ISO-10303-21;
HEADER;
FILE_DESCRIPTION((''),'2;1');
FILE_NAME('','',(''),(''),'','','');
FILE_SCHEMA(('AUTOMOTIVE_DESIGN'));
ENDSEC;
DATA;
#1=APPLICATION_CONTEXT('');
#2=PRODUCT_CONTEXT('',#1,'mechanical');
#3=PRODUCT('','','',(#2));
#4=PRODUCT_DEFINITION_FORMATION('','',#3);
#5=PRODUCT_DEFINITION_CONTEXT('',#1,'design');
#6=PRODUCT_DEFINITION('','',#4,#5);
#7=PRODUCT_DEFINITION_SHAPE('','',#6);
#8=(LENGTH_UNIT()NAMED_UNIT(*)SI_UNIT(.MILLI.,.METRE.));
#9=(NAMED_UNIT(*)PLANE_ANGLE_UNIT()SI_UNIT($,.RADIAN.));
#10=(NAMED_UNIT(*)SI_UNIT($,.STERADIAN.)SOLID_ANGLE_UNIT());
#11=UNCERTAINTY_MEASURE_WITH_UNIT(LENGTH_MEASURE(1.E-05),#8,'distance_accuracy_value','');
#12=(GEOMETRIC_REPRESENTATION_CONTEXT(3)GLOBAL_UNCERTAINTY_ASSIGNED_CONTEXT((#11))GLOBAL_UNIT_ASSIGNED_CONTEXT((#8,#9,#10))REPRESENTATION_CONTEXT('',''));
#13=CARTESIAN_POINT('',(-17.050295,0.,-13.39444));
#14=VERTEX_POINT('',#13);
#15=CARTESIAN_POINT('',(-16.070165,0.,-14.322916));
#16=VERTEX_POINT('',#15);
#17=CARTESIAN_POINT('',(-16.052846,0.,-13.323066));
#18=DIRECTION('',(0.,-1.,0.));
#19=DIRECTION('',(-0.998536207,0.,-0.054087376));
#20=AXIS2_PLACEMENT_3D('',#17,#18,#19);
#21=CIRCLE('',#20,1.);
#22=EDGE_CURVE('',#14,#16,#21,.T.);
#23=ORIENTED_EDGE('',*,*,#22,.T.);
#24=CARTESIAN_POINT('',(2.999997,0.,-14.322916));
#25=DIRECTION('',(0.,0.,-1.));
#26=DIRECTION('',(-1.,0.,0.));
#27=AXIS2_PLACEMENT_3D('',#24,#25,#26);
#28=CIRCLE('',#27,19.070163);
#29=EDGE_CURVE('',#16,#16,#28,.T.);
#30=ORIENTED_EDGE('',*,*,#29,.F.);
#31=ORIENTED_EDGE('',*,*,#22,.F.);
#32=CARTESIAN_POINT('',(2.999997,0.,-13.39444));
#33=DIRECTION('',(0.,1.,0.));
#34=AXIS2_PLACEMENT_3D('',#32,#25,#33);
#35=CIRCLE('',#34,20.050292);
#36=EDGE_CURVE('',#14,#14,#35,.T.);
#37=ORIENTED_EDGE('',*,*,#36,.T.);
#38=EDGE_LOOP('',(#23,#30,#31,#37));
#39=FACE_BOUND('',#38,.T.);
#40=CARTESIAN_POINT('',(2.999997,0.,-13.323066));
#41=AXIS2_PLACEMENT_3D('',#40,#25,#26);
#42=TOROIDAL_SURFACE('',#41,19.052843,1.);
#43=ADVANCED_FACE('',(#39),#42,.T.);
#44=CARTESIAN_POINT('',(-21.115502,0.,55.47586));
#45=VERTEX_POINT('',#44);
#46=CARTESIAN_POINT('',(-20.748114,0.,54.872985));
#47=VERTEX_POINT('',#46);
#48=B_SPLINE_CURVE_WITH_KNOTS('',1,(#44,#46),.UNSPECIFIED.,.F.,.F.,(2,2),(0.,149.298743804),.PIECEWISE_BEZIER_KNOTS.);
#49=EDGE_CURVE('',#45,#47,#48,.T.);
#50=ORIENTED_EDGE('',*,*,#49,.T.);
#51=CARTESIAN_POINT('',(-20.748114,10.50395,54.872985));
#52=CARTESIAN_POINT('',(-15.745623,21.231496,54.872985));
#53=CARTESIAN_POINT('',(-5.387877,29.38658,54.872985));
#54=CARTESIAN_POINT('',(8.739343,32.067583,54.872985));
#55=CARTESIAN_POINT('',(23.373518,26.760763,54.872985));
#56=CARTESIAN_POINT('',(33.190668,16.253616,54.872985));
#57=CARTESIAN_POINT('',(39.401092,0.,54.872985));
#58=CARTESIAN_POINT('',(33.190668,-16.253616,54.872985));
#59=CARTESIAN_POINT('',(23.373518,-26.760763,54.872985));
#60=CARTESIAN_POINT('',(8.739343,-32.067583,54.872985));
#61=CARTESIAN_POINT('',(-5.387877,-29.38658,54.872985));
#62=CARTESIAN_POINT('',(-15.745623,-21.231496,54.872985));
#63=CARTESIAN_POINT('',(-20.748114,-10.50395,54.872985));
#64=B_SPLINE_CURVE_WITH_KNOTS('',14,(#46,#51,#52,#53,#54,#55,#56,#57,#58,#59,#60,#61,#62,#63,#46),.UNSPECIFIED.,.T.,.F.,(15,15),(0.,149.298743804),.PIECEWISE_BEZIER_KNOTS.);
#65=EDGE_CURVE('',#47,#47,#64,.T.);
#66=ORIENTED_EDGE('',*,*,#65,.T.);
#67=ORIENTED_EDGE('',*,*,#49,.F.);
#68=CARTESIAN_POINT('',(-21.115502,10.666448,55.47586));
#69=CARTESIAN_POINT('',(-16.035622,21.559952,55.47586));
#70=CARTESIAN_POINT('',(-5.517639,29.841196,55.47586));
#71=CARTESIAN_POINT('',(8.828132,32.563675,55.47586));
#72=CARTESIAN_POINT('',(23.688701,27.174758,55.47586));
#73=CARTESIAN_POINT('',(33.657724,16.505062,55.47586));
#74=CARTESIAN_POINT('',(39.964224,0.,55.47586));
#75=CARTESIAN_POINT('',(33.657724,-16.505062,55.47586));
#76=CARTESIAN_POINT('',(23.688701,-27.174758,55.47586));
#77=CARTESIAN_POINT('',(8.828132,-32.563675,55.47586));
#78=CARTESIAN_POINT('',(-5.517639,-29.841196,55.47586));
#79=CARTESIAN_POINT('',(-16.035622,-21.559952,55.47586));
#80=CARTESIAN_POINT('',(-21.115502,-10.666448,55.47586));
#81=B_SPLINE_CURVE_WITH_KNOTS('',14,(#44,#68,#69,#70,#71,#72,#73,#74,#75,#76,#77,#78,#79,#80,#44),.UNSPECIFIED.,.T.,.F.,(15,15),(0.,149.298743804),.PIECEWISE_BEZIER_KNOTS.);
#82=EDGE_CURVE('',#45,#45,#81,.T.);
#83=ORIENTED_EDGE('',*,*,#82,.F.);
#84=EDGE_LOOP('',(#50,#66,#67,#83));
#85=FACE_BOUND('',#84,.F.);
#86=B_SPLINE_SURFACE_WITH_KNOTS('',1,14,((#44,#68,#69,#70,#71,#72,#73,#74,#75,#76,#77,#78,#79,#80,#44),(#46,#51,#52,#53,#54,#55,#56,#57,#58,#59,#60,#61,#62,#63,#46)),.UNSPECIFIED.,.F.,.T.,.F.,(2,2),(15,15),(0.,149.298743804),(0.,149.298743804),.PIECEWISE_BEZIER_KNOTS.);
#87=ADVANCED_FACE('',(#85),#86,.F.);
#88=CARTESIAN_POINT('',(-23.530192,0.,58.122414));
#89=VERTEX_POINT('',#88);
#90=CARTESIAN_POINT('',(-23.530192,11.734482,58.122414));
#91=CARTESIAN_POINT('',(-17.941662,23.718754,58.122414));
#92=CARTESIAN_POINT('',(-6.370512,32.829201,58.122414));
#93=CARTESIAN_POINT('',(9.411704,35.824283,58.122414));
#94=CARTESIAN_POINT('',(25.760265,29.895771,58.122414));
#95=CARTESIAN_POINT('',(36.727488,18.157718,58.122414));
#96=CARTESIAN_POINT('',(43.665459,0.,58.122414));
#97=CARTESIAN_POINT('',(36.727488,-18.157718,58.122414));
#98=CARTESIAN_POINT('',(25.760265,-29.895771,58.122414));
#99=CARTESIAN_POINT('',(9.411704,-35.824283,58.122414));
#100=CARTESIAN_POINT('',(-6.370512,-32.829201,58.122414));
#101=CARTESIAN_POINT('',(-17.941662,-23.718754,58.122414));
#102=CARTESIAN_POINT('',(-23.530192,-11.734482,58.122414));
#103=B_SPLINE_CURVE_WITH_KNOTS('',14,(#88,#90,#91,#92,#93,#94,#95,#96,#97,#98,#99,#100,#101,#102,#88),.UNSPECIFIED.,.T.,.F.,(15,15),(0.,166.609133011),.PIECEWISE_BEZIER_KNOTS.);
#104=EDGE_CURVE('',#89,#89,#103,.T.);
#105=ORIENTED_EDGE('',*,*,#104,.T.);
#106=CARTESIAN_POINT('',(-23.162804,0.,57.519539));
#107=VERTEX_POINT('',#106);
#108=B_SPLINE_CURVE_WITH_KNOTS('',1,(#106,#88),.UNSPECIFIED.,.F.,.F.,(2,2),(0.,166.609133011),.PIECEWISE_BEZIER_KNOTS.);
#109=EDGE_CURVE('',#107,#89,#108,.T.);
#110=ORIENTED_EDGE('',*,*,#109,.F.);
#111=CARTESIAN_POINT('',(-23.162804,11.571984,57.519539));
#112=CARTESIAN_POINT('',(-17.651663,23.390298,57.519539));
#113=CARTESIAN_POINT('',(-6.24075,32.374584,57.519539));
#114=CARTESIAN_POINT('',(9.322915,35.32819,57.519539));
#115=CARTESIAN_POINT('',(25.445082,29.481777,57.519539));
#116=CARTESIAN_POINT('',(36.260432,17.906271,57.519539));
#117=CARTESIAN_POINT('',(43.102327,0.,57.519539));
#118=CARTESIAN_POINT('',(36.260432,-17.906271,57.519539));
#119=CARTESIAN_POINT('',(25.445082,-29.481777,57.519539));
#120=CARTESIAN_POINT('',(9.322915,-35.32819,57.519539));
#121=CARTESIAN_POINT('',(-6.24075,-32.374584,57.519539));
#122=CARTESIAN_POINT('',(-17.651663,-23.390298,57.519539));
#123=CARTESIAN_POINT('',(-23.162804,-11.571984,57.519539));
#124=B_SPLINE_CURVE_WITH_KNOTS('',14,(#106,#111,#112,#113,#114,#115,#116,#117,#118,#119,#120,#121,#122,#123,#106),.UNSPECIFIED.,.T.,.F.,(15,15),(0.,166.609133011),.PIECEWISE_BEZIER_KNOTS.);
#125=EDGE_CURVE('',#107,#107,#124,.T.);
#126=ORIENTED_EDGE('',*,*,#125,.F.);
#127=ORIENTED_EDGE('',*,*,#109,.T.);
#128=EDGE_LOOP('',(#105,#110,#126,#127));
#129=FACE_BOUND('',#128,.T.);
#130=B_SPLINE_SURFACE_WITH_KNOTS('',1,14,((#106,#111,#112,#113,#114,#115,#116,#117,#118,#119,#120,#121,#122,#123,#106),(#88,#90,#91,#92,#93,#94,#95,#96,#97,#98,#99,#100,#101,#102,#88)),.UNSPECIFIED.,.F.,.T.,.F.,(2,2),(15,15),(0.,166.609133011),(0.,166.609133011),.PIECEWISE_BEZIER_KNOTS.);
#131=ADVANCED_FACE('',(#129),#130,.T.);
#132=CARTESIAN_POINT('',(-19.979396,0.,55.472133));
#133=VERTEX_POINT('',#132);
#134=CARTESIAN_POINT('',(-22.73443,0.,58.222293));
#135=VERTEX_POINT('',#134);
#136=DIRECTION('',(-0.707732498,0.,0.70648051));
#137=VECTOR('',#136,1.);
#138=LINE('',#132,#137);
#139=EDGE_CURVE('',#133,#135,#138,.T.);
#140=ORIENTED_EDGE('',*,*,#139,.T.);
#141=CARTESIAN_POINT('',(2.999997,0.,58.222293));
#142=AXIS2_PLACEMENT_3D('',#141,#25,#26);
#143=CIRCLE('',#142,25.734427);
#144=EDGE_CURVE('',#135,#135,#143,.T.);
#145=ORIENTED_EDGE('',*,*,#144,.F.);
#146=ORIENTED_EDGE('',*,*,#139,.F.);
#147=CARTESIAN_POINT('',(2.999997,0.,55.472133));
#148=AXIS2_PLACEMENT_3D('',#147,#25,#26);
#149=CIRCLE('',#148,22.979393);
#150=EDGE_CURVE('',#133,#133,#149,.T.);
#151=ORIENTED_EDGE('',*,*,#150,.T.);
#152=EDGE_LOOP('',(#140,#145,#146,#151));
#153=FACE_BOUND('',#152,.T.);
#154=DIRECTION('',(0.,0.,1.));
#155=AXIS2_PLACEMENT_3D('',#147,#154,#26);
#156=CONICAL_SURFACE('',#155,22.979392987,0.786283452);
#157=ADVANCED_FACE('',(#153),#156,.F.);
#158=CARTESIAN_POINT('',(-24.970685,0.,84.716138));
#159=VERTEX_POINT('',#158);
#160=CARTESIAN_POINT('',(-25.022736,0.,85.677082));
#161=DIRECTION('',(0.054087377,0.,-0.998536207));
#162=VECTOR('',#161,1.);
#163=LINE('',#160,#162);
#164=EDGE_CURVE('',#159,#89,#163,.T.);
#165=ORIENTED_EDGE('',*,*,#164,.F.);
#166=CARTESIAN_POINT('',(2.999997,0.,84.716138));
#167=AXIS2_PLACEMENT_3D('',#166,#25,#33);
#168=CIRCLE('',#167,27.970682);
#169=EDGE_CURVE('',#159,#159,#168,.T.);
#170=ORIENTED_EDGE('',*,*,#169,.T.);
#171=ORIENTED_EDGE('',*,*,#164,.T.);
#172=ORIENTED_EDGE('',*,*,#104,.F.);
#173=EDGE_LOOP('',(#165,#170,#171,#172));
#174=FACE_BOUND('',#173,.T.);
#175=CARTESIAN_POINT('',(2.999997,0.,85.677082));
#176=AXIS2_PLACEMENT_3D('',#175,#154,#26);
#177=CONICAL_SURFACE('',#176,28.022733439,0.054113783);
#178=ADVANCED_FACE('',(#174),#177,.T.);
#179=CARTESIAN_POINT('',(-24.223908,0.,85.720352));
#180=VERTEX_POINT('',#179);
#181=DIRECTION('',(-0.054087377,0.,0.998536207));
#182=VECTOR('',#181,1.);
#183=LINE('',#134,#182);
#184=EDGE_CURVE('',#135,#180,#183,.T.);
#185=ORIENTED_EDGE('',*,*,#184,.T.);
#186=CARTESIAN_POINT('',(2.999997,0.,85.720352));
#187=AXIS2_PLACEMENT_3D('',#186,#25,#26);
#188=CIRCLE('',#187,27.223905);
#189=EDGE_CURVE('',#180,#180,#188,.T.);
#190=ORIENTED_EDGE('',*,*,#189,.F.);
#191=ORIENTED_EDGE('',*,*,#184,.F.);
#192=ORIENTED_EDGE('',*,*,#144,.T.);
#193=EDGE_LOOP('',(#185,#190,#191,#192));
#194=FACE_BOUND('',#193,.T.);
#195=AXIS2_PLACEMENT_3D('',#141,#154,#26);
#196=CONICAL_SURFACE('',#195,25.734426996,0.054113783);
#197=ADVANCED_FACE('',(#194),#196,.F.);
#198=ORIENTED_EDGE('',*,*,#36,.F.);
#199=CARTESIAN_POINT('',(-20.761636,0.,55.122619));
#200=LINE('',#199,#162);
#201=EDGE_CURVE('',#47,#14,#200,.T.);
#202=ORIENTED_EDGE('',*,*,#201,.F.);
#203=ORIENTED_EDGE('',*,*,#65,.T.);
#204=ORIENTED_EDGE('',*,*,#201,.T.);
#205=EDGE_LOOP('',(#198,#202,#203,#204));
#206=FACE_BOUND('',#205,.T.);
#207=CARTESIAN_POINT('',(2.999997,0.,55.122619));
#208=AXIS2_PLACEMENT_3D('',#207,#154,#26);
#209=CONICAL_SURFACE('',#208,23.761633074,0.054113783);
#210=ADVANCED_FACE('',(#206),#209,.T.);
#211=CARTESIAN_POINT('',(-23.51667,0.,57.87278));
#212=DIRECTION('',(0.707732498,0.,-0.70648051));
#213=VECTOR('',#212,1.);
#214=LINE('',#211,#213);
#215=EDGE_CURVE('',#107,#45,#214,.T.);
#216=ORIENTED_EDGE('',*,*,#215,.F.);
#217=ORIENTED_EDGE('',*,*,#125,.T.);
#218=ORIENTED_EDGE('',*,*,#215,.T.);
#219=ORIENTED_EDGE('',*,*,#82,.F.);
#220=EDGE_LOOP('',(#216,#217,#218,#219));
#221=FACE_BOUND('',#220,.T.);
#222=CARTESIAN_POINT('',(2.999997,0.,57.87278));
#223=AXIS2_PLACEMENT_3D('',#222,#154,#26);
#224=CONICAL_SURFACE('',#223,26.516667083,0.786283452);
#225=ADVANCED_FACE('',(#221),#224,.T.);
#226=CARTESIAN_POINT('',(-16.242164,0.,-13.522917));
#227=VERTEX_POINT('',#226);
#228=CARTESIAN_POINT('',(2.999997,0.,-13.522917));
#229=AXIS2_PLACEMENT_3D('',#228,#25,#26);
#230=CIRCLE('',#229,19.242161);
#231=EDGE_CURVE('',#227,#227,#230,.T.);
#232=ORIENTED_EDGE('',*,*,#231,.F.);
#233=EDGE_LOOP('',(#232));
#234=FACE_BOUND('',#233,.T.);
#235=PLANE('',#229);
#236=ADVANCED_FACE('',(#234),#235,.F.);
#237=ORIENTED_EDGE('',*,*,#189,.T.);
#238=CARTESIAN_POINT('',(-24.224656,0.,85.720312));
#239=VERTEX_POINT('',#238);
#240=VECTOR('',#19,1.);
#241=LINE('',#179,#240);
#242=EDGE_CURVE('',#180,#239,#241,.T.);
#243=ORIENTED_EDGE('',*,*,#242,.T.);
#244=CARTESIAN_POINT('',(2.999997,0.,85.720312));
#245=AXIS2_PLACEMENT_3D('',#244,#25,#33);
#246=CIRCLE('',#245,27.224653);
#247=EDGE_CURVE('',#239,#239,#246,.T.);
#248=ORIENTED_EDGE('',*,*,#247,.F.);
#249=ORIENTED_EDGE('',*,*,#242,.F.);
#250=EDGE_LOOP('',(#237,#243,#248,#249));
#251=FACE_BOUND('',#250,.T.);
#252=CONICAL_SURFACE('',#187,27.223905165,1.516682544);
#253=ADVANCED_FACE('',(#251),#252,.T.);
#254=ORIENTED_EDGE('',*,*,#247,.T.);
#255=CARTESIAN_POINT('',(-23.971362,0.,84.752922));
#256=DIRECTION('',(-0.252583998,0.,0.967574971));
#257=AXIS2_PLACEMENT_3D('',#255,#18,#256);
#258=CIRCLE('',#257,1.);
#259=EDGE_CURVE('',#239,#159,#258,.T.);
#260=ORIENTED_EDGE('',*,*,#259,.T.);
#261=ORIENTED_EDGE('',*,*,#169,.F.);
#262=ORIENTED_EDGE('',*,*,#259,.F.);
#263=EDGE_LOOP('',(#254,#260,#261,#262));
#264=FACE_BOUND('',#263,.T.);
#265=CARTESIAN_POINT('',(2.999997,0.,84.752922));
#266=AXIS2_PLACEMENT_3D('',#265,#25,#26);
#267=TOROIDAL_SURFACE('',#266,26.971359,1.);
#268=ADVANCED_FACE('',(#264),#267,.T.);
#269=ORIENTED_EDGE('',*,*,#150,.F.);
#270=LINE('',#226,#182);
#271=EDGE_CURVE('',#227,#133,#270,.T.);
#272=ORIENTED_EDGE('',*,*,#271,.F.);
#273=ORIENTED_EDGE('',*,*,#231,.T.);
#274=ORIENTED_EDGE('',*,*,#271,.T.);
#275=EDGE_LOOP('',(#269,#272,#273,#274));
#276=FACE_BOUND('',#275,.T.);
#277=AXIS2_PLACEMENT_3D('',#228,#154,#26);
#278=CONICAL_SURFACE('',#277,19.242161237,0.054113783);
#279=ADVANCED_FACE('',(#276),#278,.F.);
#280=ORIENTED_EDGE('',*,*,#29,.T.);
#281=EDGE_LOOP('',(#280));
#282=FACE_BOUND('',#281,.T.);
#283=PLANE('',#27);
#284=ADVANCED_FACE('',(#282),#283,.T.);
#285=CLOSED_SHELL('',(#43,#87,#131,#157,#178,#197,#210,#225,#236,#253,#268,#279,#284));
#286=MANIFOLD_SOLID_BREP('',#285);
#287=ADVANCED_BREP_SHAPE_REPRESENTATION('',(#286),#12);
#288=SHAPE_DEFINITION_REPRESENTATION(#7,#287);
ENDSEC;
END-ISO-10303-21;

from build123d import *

# Parameters (mm, degrees)
F3_C1_SIZE2 = 0.25
F3_C1_SIZE  = 0.5
F3_C2_SIZE2 = 0.25
F3_C2_SIZE  = 0.5


# Not quite as in the source:
# - a fillet or chamfer that OpenCascade refuses, or shapes differently, is made with other operations: its cross-section is extruded or revolved along the edge and cut away or added


with BuildPart() as f1:
    # F0 (on Front) → F1 (revolve)
    with BuildSketch(Plane.XZ):
        Polygon((-24.2239079518, 85.7203521749), (-25.0227362253, 85.6770823112), (-23.5166698694, 57.8727796674), (-20.7616358603, 55.1226193476), (-17.0000027865, -14.3229160458), (2.9999972135, -14.3229160458), (2.9999972135, -13.5229167386), (-16.2421640236, -13.5229167386), (-19.9793957734, 55.4721326625), (-22.7344297825, 58.2222929823), align=None)
    revolve(axis=Axis((2.9999972135, 0, 16.662178661), (0, 0, -1)))

    # F2: fillet of radius 1 on 2 edges, made by hand

    # F2_s1 → F2_t2 (revolve, cut)
    with BuildSketch(Plane.XZ):
        with BuildLine():
            ThreePointArc((-24.2239458394, 85.7204973112), (-24.7789966166, 85.342605366), (-24.9698980485, 84.6988349638))
            Line((-24.9698980485, 84.6988349638), (-24.9898687726, 84.6977532163))
            ThreePointArc((-24.9898687726, 84.6977532163), (-25.0162129708, 85.1868809465), (-25.0427069494, 85.6760005637))
            Line((-25.0427069494, 85.6760005637), (-25.0238179728, 85.6970530353))
            ThreePointArc((-25.0238179728, 85.6970530353), (-24.6244188052, 85.7186871564), (-24.2289975194, 85.7398488106))
            Line((-24.2289975194, 85.7398488106), (-24.2239458394, 85.7204973112))
        make_face()
    revolve(axis=Axis((2.9999972135, 0, 85.6770823112), (0, 0, -1)), mode=Mode.SUBTRACT)

    # F2_s3 → F2_t4 (revolve, cut)
    with BuildSketch(Plane.XZ):
        with BuildLine():
            ThreePointArc((-17.0513818139, -13.3771534223), (-16.7405637995, -14.0490437922), (-16.0528456074, -14.3230660458))
            Line((-16.0528456074, -14.3230660458), (-16.0528456074, -14.3430660458))
            ThreePointArc((-16.0528456074, -14.3430660458), (-16.526424197, -14.3429160458), (-17.0000027865, -14.3429160458))
            Line((-17.0000027865, -14.3429160458), (-17.0199735106, -14.3239977933))
            ThreePointArc((-17.0199735106, -14.3239977933), (-17.0455881341, -13.851112425), (-17.071352538, -13.3782351698))
            Line((-17.071352538, -13.3782351698), (-17.0513818139, -13.3771534223))
        make_face()
    revolve(axis=Axis((2.9999972135, 0, -14.3229160458), (0, 0, -1)), mode=Mode.SUBTRACT)

    # F3: chamfer of 0.25 x 0.5 on 3 edges, made by hand

    # F3_c1
    f3_c1_edges = [f1.edges().sort_by_distance(p)[0] for p in [
        (26.7616302873, 0, 55.1226193476),
    ]]
    f3_c1_side = f1.faces().sort_by_distance((26.7651689498, 0, 55.1261517501))[0]
    chamfer(f3_c1_edges, length=F3_C1_SIZE, length2=F3_C1_SIZE2, reference=f3_c1_side)

    # F3_c2
    f3_c2_edges = [f1.edges().sort_by_distance(p)[0] for p in [
        (29.5166642964, 0, 57.8727796674),
    ]]
    f3_c2_side = f1.faces().sort_by_distance((29.5131256339, 0, 57.8692472648))[0]
    chamfer(f3_c2_edges, length=F3_C2_SIZE, length2=F3_C2_SIZE2, reference=f3_c2_side)


solid = f1.part
